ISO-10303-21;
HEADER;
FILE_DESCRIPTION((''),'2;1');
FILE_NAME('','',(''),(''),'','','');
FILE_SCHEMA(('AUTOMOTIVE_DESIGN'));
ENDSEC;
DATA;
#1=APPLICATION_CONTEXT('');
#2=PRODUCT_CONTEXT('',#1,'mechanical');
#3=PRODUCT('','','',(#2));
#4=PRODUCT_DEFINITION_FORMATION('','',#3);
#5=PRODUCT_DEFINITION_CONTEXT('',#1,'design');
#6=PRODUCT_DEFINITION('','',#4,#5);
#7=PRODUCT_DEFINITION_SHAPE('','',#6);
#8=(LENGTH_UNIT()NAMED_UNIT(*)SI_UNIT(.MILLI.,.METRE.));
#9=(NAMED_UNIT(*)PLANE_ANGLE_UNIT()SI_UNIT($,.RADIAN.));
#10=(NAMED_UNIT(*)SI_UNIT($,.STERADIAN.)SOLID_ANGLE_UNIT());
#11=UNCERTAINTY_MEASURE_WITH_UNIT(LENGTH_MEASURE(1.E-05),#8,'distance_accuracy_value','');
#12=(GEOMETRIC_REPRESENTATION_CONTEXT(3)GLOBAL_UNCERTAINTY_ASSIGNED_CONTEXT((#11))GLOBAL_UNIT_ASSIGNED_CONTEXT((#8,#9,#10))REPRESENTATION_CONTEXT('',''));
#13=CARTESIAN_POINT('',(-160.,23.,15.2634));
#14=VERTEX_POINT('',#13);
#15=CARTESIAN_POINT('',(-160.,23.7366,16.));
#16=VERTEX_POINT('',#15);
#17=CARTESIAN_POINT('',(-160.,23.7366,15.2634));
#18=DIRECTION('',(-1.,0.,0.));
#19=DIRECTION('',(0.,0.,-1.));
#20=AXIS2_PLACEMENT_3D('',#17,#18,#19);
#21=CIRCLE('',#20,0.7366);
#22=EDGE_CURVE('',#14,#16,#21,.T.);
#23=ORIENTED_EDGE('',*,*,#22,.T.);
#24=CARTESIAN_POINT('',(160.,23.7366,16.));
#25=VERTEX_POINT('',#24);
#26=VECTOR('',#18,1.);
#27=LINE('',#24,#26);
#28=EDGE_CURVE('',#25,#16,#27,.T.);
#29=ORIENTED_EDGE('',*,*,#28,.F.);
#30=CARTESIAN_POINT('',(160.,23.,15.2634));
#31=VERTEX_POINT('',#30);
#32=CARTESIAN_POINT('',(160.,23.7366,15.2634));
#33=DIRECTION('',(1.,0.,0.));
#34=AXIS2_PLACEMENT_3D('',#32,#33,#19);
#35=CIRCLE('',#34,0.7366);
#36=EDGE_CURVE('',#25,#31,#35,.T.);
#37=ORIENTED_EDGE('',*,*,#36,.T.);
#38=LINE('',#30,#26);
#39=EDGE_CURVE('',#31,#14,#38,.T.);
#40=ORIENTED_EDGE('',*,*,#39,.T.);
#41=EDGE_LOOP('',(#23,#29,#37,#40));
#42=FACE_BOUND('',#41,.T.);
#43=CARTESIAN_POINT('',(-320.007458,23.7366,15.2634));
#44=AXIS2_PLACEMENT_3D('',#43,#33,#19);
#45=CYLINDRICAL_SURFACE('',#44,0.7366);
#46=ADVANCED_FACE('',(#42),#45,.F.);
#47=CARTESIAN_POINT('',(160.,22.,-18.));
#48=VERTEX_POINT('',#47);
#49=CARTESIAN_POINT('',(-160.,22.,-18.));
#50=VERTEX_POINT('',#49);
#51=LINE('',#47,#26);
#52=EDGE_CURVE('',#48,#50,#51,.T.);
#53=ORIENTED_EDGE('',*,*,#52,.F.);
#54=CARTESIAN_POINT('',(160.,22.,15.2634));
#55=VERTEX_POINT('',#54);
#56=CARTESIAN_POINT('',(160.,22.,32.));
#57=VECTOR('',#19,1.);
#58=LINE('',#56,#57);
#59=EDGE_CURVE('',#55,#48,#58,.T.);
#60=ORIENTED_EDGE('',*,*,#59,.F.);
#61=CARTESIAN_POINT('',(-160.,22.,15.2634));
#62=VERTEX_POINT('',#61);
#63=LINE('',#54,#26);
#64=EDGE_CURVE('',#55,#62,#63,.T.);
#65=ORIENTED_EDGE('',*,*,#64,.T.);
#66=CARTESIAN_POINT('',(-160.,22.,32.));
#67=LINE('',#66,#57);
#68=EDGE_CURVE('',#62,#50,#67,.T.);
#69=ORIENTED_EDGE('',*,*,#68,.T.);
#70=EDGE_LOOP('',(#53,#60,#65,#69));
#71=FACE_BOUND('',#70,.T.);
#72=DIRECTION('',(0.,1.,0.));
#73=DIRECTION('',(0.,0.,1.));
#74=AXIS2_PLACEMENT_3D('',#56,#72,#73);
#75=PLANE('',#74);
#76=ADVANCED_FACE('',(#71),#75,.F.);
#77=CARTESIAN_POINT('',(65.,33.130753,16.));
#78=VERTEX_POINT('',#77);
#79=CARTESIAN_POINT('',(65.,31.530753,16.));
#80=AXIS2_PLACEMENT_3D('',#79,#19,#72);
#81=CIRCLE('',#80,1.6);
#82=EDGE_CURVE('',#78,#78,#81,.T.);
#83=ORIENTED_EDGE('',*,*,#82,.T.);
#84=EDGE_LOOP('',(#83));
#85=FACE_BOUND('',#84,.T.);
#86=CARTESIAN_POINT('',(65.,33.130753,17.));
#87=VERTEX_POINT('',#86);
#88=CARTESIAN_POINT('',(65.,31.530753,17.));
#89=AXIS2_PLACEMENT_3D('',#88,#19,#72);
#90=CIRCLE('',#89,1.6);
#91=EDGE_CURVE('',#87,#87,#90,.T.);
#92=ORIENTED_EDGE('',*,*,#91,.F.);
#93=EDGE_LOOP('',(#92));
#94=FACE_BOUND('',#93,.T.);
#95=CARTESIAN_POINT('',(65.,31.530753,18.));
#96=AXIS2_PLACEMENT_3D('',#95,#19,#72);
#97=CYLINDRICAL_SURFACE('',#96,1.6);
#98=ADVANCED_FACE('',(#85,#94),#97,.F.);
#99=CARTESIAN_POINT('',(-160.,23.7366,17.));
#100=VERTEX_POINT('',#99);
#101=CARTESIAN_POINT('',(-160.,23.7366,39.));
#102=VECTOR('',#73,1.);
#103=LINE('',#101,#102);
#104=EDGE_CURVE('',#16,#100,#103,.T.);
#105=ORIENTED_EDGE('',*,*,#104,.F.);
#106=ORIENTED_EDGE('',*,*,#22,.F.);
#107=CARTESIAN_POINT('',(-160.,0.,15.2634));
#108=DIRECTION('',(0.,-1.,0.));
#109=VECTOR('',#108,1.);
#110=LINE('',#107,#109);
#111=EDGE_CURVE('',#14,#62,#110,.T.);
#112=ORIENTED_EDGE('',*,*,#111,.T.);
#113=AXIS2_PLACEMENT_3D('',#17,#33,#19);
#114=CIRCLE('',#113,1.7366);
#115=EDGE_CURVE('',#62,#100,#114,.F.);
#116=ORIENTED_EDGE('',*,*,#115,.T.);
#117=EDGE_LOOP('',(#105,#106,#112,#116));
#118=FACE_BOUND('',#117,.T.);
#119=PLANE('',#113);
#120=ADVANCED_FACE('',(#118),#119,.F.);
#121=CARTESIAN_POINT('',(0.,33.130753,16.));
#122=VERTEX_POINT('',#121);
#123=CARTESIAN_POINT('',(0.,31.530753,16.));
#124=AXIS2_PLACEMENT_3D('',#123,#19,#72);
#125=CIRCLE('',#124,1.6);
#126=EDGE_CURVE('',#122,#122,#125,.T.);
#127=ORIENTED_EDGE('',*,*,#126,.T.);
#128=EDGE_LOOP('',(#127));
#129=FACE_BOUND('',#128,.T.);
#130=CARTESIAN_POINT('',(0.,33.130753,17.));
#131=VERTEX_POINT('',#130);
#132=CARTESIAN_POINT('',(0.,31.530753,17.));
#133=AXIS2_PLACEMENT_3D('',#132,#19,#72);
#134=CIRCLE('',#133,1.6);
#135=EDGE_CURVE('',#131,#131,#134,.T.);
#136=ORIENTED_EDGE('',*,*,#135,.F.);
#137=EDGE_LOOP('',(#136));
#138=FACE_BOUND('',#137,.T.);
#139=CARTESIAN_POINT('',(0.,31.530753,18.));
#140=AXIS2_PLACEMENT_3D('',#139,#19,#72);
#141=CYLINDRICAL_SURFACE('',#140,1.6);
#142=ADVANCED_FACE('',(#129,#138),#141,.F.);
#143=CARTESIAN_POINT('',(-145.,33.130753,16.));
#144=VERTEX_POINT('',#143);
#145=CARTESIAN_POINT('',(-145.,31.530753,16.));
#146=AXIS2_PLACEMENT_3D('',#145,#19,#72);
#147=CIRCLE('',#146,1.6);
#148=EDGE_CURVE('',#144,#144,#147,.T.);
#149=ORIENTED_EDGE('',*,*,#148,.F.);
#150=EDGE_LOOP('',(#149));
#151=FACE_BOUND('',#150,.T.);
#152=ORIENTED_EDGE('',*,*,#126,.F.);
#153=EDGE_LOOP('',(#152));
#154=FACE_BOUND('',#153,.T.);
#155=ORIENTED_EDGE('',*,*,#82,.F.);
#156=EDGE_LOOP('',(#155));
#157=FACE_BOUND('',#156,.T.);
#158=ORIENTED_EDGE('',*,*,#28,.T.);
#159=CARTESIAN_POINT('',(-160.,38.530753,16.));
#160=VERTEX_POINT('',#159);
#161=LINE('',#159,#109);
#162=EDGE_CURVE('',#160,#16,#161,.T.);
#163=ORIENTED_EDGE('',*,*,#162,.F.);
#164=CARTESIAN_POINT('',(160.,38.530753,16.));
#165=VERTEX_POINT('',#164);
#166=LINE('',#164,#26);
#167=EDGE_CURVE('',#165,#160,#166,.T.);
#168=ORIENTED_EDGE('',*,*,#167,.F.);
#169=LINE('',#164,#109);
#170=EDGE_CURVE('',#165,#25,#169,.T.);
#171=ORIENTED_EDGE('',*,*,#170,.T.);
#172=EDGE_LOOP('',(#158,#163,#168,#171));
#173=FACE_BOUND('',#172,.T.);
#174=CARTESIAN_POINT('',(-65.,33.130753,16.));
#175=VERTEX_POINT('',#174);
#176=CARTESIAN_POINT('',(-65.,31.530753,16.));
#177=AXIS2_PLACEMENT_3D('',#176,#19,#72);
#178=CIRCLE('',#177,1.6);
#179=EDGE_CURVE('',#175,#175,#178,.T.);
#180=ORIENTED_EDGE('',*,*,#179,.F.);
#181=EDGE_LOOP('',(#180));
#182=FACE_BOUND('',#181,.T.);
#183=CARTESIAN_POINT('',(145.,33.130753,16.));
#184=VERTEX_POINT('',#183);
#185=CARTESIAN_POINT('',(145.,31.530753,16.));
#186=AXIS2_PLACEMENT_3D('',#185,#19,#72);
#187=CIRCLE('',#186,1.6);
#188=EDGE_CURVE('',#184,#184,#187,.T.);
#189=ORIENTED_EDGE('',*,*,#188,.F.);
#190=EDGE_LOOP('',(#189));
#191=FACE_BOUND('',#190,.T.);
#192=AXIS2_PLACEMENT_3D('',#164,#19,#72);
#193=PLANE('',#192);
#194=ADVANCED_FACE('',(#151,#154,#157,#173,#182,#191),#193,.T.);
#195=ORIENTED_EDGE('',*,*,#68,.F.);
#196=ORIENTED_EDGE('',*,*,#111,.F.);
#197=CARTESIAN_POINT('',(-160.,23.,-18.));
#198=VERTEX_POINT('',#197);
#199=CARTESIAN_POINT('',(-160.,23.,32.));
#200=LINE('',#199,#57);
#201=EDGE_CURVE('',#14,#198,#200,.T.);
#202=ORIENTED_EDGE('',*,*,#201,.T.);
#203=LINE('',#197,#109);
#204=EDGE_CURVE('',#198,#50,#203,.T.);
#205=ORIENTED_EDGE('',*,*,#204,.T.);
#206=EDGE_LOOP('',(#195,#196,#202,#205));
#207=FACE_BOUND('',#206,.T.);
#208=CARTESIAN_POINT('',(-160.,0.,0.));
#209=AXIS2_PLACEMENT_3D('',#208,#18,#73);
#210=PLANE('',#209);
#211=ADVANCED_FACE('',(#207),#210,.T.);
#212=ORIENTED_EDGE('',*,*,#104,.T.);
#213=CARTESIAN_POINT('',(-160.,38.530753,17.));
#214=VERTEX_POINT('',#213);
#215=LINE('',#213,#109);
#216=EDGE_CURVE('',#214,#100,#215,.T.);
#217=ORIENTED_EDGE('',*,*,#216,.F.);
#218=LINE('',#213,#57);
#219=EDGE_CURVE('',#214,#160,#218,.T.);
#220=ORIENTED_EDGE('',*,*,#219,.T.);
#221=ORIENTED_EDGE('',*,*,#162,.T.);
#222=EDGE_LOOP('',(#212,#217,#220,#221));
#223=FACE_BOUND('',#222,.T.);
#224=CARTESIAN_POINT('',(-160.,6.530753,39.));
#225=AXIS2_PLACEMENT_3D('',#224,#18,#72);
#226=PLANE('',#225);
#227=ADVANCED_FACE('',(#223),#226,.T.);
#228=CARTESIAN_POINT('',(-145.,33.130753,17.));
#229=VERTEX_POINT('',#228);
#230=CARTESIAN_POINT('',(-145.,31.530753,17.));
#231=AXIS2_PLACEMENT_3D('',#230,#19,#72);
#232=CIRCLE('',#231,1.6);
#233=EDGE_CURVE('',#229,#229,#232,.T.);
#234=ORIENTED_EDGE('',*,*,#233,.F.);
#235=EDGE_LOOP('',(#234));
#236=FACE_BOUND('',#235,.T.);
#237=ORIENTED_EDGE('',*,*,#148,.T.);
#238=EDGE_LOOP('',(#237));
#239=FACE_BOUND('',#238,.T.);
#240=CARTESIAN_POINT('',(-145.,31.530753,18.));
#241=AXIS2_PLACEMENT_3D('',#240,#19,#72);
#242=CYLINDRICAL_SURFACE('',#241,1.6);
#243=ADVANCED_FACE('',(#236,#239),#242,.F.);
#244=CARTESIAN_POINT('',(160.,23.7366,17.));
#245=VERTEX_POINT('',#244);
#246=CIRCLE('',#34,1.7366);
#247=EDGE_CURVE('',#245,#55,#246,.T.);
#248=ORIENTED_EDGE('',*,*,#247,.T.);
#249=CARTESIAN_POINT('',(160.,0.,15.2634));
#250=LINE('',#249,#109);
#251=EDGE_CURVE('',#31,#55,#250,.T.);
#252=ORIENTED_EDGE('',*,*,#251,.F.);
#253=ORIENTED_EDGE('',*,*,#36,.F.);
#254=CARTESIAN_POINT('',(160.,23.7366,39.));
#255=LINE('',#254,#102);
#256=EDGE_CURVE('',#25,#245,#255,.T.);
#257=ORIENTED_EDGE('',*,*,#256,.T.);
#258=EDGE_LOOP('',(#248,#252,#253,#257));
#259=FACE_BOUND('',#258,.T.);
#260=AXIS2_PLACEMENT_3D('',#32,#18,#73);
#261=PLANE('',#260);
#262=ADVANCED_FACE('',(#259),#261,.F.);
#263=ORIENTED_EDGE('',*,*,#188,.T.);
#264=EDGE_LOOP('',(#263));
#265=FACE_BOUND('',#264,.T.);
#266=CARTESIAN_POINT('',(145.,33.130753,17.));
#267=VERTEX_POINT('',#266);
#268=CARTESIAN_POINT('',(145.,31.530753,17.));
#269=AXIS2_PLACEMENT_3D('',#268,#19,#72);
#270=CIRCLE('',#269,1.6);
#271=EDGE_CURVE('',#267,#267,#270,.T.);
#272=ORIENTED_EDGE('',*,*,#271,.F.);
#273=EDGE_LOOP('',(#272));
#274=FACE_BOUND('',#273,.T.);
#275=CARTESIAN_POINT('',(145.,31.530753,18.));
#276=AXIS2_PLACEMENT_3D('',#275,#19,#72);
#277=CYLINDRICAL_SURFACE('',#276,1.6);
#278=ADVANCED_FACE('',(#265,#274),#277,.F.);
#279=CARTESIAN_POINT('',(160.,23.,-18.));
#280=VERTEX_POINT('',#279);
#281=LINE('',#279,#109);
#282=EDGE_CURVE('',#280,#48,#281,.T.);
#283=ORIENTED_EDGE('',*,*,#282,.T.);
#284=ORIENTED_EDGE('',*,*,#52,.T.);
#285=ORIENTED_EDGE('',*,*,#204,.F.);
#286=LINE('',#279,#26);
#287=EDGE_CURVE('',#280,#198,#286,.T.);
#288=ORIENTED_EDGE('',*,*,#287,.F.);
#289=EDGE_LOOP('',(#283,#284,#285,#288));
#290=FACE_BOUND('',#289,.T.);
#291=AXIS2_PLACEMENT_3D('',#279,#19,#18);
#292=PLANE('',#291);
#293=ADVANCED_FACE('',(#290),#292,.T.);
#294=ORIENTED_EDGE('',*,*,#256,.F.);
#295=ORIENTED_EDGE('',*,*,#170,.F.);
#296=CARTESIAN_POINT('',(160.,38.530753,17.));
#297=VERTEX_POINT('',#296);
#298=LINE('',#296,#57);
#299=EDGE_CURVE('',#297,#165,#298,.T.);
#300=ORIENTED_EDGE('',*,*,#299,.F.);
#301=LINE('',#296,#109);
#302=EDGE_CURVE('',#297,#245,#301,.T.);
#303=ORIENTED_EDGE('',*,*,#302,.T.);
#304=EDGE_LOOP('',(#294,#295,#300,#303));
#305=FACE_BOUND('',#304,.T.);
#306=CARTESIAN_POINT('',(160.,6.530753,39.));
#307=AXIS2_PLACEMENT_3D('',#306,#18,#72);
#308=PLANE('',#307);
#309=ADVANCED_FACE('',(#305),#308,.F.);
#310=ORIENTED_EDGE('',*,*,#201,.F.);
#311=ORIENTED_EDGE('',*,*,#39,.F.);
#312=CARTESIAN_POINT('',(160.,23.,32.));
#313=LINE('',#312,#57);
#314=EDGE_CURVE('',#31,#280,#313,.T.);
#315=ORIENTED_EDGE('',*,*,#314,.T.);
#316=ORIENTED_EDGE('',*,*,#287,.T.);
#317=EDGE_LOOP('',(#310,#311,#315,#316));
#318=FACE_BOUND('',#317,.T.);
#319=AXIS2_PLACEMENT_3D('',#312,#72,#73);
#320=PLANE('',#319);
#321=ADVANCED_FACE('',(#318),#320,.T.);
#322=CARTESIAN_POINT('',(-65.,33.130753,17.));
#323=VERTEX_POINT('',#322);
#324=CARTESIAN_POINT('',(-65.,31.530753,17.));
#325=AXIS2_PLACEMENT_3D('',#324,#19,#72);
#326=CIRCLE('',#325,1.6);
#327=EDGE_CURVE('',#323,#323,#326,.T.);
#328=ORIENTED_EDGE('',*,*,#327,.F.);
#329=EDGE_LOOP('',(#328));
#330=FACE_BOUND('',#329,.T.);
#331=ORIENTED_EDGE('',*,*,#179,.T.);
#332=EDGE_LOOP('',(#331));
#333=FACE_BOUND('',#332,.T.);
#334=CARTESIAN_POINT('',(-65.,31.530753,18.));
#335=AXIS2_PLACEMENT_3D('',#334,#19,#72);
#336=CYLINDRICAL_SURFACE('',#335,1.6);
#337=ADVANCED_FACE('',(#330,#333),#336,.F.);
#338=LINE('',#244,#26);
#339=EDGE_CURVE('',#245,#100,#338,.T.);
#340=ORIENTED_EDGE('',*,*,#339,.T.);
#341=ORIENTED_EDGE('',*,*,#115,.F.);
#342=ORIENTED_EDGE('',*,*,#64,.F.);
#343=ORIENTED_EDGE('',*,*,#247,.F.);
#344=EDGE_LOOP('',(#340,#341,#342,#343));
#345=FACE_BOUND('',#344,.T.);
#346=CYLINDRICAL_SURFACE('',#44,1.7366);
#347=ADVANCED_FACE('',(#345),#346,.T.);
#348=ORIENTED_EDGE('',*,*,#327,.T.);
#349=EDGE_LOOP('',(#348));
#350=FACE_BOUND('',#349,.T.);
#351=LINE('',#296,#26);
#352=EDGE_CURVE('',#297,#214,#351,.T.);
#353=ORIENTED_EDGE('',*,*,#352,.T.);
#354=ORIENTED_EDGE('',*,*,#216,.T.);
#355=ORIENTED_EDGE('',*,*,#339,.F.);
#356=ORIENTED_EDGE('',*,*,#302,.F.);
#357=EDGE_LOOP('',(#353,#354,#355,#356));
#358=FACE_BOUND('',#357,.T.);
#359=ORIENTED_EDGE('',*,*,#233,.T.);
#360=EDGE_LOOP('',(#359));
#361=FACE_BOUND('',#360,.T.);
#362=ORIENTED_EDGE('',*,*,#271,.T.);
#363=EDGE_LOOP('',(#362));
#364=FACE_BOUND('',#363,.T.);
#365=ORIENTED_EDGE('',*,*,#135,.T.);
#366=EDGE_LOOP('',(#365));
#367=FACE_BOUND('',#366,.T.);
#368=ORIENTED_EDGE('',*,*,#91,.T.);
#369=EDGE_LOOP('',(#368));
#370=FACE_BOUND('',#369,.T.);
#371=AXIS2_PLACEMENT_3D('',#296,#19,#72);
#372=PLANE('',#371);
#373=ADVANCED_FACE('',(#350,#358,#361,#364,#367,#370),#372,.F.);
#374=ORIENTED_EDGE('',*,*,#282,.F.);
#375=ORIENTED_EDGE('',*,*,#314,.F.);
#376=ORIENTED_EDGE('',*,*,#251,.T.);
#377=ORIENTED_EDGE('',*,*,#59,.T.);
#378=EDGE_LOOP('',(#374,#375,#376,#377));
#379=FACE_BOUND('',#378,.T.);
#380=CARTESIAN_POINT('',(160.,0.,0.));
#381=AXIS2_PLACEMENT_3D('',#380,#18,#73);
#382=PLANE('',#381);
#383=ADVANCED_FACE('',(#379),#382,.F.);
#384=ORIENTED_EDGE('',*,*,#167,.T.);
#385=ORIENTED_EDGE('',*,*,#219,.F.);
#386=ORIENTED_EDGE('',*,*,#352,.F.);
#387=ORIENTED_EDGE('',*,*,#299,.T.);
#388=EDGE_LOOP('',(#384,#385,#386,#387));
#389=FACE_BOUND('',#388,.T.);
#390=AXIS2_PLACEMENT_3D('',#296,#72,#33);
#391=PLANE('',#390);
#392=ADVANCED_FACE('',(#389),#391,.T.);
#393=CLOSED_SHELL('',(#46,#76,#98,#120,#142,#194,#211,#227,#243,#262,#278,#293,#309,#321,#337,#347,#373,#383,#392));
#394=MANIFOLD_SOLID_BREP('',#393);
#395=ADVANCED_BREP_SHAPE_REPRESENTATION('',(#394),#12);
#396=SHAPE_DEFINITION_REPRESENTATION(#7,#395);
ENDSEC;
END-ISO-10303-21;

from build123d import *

# Parameters (mm, degrees)
SKETCH_1_W             = 50
SKETCH_1_H             = 1
SM_BASE_FLANGE_1_DEPTH = 160
OTHER_START            = -160
OTHER_1_DEPTH          = 320
OTHER_1_2_DEPTH        = 320
SKETCH_4_R             = 1.6
CUT_EXTRUDE_1_DEPTH    = 2


# Read off the part's stored shape, not the designer's step: 绘制的折弯1
# Sheet-metal steps are written as plain solids
with BuildPart() as part:
    # Sketch 1 → 基体-法兰1 (new, symmetric)
    with BuildSketch(Plane(origin=(0, 0, 0), x_dir=(0, 0, -1), z_dir=(1, 0, 0))):
        with Locations((-7, 22.5)):
            Rectangle(SKETCH_1_W, SKETCH_1_H)
    extrude(amount=SM_BASE_FLANGE_1_DEPTH, both=True)

    # Other 1 outline → Other 1 (cut)
    with BuildSketch(Plane.YZ.offset(OTHER_START)):
        with BuildLine():
            ThreePointArc((22, 15.2634), (22.271171885, 16.195226164), (23, 16.83604109))
            Line((23, 16.83604109), (23, 32))
            Line((23, 32), (22, 32))
            Line((22, 32), (22, 15.2634))
        make_face()
    extrude(amount=OTHER_1_DEPTH, mode=Mode.SUBTRACT)

    # Other 1 2 outline → Other 1 2 (add)
    with BuildSketch(Plane.YZ.offset(OTHER_START)):
        with BuildLine():
            ThreePointArc((23, 15.2634), (23.215745145, 15.784254855), (23.7366, 16))
            Line((23.7366, 16), (38.530753262, 16))
            Line((38.530753262, 16), (38.530753262, 17))
            Line((38.530753262, 17), (23.7366, 17))
            ThreePointArc((23.7366, 17), (23.359286442, 16.958514757), (23, 16.83604109))
            Line((23, 16.83604109), (23, 15.2634))
        make_face()
    extrude(amount=OTHER_1_2_DEPTH)

    # 草图4 → 切除-拉伸1 (cut)
    with BuildSketch(Plane(origin=(0, 0, 16), x_dir=(-1, 0, 0), z_dir=(0, 0, -1))):
        with Locations(Location((0, 31.530753262, 0), (0, 0, 90))):
            Circle(SKETCH_4_R)
        with Locations(Location((145, 31.530753262, 0), (0, 0, 90))):
            Circle(SKETCH_4_R)
        with Locations(Location((65, 31.530753262, 0), (0, 0, 90))):
            Circle(SKETCH_4_R)
        with Locations(Location((-145, 31.530753262, 0), (0, 0, 90))):
            Circle(SKETCH_4_R)
        with Locations(Location((-65, 31.530753262, 0), (0, 0, 90))):
            Circle(SKETCH_4_R)
    extrude(amount=-CUT_EXTRUDE_1_DEPTH, mode=Mode.SUBTRACT)


solid = part.part
